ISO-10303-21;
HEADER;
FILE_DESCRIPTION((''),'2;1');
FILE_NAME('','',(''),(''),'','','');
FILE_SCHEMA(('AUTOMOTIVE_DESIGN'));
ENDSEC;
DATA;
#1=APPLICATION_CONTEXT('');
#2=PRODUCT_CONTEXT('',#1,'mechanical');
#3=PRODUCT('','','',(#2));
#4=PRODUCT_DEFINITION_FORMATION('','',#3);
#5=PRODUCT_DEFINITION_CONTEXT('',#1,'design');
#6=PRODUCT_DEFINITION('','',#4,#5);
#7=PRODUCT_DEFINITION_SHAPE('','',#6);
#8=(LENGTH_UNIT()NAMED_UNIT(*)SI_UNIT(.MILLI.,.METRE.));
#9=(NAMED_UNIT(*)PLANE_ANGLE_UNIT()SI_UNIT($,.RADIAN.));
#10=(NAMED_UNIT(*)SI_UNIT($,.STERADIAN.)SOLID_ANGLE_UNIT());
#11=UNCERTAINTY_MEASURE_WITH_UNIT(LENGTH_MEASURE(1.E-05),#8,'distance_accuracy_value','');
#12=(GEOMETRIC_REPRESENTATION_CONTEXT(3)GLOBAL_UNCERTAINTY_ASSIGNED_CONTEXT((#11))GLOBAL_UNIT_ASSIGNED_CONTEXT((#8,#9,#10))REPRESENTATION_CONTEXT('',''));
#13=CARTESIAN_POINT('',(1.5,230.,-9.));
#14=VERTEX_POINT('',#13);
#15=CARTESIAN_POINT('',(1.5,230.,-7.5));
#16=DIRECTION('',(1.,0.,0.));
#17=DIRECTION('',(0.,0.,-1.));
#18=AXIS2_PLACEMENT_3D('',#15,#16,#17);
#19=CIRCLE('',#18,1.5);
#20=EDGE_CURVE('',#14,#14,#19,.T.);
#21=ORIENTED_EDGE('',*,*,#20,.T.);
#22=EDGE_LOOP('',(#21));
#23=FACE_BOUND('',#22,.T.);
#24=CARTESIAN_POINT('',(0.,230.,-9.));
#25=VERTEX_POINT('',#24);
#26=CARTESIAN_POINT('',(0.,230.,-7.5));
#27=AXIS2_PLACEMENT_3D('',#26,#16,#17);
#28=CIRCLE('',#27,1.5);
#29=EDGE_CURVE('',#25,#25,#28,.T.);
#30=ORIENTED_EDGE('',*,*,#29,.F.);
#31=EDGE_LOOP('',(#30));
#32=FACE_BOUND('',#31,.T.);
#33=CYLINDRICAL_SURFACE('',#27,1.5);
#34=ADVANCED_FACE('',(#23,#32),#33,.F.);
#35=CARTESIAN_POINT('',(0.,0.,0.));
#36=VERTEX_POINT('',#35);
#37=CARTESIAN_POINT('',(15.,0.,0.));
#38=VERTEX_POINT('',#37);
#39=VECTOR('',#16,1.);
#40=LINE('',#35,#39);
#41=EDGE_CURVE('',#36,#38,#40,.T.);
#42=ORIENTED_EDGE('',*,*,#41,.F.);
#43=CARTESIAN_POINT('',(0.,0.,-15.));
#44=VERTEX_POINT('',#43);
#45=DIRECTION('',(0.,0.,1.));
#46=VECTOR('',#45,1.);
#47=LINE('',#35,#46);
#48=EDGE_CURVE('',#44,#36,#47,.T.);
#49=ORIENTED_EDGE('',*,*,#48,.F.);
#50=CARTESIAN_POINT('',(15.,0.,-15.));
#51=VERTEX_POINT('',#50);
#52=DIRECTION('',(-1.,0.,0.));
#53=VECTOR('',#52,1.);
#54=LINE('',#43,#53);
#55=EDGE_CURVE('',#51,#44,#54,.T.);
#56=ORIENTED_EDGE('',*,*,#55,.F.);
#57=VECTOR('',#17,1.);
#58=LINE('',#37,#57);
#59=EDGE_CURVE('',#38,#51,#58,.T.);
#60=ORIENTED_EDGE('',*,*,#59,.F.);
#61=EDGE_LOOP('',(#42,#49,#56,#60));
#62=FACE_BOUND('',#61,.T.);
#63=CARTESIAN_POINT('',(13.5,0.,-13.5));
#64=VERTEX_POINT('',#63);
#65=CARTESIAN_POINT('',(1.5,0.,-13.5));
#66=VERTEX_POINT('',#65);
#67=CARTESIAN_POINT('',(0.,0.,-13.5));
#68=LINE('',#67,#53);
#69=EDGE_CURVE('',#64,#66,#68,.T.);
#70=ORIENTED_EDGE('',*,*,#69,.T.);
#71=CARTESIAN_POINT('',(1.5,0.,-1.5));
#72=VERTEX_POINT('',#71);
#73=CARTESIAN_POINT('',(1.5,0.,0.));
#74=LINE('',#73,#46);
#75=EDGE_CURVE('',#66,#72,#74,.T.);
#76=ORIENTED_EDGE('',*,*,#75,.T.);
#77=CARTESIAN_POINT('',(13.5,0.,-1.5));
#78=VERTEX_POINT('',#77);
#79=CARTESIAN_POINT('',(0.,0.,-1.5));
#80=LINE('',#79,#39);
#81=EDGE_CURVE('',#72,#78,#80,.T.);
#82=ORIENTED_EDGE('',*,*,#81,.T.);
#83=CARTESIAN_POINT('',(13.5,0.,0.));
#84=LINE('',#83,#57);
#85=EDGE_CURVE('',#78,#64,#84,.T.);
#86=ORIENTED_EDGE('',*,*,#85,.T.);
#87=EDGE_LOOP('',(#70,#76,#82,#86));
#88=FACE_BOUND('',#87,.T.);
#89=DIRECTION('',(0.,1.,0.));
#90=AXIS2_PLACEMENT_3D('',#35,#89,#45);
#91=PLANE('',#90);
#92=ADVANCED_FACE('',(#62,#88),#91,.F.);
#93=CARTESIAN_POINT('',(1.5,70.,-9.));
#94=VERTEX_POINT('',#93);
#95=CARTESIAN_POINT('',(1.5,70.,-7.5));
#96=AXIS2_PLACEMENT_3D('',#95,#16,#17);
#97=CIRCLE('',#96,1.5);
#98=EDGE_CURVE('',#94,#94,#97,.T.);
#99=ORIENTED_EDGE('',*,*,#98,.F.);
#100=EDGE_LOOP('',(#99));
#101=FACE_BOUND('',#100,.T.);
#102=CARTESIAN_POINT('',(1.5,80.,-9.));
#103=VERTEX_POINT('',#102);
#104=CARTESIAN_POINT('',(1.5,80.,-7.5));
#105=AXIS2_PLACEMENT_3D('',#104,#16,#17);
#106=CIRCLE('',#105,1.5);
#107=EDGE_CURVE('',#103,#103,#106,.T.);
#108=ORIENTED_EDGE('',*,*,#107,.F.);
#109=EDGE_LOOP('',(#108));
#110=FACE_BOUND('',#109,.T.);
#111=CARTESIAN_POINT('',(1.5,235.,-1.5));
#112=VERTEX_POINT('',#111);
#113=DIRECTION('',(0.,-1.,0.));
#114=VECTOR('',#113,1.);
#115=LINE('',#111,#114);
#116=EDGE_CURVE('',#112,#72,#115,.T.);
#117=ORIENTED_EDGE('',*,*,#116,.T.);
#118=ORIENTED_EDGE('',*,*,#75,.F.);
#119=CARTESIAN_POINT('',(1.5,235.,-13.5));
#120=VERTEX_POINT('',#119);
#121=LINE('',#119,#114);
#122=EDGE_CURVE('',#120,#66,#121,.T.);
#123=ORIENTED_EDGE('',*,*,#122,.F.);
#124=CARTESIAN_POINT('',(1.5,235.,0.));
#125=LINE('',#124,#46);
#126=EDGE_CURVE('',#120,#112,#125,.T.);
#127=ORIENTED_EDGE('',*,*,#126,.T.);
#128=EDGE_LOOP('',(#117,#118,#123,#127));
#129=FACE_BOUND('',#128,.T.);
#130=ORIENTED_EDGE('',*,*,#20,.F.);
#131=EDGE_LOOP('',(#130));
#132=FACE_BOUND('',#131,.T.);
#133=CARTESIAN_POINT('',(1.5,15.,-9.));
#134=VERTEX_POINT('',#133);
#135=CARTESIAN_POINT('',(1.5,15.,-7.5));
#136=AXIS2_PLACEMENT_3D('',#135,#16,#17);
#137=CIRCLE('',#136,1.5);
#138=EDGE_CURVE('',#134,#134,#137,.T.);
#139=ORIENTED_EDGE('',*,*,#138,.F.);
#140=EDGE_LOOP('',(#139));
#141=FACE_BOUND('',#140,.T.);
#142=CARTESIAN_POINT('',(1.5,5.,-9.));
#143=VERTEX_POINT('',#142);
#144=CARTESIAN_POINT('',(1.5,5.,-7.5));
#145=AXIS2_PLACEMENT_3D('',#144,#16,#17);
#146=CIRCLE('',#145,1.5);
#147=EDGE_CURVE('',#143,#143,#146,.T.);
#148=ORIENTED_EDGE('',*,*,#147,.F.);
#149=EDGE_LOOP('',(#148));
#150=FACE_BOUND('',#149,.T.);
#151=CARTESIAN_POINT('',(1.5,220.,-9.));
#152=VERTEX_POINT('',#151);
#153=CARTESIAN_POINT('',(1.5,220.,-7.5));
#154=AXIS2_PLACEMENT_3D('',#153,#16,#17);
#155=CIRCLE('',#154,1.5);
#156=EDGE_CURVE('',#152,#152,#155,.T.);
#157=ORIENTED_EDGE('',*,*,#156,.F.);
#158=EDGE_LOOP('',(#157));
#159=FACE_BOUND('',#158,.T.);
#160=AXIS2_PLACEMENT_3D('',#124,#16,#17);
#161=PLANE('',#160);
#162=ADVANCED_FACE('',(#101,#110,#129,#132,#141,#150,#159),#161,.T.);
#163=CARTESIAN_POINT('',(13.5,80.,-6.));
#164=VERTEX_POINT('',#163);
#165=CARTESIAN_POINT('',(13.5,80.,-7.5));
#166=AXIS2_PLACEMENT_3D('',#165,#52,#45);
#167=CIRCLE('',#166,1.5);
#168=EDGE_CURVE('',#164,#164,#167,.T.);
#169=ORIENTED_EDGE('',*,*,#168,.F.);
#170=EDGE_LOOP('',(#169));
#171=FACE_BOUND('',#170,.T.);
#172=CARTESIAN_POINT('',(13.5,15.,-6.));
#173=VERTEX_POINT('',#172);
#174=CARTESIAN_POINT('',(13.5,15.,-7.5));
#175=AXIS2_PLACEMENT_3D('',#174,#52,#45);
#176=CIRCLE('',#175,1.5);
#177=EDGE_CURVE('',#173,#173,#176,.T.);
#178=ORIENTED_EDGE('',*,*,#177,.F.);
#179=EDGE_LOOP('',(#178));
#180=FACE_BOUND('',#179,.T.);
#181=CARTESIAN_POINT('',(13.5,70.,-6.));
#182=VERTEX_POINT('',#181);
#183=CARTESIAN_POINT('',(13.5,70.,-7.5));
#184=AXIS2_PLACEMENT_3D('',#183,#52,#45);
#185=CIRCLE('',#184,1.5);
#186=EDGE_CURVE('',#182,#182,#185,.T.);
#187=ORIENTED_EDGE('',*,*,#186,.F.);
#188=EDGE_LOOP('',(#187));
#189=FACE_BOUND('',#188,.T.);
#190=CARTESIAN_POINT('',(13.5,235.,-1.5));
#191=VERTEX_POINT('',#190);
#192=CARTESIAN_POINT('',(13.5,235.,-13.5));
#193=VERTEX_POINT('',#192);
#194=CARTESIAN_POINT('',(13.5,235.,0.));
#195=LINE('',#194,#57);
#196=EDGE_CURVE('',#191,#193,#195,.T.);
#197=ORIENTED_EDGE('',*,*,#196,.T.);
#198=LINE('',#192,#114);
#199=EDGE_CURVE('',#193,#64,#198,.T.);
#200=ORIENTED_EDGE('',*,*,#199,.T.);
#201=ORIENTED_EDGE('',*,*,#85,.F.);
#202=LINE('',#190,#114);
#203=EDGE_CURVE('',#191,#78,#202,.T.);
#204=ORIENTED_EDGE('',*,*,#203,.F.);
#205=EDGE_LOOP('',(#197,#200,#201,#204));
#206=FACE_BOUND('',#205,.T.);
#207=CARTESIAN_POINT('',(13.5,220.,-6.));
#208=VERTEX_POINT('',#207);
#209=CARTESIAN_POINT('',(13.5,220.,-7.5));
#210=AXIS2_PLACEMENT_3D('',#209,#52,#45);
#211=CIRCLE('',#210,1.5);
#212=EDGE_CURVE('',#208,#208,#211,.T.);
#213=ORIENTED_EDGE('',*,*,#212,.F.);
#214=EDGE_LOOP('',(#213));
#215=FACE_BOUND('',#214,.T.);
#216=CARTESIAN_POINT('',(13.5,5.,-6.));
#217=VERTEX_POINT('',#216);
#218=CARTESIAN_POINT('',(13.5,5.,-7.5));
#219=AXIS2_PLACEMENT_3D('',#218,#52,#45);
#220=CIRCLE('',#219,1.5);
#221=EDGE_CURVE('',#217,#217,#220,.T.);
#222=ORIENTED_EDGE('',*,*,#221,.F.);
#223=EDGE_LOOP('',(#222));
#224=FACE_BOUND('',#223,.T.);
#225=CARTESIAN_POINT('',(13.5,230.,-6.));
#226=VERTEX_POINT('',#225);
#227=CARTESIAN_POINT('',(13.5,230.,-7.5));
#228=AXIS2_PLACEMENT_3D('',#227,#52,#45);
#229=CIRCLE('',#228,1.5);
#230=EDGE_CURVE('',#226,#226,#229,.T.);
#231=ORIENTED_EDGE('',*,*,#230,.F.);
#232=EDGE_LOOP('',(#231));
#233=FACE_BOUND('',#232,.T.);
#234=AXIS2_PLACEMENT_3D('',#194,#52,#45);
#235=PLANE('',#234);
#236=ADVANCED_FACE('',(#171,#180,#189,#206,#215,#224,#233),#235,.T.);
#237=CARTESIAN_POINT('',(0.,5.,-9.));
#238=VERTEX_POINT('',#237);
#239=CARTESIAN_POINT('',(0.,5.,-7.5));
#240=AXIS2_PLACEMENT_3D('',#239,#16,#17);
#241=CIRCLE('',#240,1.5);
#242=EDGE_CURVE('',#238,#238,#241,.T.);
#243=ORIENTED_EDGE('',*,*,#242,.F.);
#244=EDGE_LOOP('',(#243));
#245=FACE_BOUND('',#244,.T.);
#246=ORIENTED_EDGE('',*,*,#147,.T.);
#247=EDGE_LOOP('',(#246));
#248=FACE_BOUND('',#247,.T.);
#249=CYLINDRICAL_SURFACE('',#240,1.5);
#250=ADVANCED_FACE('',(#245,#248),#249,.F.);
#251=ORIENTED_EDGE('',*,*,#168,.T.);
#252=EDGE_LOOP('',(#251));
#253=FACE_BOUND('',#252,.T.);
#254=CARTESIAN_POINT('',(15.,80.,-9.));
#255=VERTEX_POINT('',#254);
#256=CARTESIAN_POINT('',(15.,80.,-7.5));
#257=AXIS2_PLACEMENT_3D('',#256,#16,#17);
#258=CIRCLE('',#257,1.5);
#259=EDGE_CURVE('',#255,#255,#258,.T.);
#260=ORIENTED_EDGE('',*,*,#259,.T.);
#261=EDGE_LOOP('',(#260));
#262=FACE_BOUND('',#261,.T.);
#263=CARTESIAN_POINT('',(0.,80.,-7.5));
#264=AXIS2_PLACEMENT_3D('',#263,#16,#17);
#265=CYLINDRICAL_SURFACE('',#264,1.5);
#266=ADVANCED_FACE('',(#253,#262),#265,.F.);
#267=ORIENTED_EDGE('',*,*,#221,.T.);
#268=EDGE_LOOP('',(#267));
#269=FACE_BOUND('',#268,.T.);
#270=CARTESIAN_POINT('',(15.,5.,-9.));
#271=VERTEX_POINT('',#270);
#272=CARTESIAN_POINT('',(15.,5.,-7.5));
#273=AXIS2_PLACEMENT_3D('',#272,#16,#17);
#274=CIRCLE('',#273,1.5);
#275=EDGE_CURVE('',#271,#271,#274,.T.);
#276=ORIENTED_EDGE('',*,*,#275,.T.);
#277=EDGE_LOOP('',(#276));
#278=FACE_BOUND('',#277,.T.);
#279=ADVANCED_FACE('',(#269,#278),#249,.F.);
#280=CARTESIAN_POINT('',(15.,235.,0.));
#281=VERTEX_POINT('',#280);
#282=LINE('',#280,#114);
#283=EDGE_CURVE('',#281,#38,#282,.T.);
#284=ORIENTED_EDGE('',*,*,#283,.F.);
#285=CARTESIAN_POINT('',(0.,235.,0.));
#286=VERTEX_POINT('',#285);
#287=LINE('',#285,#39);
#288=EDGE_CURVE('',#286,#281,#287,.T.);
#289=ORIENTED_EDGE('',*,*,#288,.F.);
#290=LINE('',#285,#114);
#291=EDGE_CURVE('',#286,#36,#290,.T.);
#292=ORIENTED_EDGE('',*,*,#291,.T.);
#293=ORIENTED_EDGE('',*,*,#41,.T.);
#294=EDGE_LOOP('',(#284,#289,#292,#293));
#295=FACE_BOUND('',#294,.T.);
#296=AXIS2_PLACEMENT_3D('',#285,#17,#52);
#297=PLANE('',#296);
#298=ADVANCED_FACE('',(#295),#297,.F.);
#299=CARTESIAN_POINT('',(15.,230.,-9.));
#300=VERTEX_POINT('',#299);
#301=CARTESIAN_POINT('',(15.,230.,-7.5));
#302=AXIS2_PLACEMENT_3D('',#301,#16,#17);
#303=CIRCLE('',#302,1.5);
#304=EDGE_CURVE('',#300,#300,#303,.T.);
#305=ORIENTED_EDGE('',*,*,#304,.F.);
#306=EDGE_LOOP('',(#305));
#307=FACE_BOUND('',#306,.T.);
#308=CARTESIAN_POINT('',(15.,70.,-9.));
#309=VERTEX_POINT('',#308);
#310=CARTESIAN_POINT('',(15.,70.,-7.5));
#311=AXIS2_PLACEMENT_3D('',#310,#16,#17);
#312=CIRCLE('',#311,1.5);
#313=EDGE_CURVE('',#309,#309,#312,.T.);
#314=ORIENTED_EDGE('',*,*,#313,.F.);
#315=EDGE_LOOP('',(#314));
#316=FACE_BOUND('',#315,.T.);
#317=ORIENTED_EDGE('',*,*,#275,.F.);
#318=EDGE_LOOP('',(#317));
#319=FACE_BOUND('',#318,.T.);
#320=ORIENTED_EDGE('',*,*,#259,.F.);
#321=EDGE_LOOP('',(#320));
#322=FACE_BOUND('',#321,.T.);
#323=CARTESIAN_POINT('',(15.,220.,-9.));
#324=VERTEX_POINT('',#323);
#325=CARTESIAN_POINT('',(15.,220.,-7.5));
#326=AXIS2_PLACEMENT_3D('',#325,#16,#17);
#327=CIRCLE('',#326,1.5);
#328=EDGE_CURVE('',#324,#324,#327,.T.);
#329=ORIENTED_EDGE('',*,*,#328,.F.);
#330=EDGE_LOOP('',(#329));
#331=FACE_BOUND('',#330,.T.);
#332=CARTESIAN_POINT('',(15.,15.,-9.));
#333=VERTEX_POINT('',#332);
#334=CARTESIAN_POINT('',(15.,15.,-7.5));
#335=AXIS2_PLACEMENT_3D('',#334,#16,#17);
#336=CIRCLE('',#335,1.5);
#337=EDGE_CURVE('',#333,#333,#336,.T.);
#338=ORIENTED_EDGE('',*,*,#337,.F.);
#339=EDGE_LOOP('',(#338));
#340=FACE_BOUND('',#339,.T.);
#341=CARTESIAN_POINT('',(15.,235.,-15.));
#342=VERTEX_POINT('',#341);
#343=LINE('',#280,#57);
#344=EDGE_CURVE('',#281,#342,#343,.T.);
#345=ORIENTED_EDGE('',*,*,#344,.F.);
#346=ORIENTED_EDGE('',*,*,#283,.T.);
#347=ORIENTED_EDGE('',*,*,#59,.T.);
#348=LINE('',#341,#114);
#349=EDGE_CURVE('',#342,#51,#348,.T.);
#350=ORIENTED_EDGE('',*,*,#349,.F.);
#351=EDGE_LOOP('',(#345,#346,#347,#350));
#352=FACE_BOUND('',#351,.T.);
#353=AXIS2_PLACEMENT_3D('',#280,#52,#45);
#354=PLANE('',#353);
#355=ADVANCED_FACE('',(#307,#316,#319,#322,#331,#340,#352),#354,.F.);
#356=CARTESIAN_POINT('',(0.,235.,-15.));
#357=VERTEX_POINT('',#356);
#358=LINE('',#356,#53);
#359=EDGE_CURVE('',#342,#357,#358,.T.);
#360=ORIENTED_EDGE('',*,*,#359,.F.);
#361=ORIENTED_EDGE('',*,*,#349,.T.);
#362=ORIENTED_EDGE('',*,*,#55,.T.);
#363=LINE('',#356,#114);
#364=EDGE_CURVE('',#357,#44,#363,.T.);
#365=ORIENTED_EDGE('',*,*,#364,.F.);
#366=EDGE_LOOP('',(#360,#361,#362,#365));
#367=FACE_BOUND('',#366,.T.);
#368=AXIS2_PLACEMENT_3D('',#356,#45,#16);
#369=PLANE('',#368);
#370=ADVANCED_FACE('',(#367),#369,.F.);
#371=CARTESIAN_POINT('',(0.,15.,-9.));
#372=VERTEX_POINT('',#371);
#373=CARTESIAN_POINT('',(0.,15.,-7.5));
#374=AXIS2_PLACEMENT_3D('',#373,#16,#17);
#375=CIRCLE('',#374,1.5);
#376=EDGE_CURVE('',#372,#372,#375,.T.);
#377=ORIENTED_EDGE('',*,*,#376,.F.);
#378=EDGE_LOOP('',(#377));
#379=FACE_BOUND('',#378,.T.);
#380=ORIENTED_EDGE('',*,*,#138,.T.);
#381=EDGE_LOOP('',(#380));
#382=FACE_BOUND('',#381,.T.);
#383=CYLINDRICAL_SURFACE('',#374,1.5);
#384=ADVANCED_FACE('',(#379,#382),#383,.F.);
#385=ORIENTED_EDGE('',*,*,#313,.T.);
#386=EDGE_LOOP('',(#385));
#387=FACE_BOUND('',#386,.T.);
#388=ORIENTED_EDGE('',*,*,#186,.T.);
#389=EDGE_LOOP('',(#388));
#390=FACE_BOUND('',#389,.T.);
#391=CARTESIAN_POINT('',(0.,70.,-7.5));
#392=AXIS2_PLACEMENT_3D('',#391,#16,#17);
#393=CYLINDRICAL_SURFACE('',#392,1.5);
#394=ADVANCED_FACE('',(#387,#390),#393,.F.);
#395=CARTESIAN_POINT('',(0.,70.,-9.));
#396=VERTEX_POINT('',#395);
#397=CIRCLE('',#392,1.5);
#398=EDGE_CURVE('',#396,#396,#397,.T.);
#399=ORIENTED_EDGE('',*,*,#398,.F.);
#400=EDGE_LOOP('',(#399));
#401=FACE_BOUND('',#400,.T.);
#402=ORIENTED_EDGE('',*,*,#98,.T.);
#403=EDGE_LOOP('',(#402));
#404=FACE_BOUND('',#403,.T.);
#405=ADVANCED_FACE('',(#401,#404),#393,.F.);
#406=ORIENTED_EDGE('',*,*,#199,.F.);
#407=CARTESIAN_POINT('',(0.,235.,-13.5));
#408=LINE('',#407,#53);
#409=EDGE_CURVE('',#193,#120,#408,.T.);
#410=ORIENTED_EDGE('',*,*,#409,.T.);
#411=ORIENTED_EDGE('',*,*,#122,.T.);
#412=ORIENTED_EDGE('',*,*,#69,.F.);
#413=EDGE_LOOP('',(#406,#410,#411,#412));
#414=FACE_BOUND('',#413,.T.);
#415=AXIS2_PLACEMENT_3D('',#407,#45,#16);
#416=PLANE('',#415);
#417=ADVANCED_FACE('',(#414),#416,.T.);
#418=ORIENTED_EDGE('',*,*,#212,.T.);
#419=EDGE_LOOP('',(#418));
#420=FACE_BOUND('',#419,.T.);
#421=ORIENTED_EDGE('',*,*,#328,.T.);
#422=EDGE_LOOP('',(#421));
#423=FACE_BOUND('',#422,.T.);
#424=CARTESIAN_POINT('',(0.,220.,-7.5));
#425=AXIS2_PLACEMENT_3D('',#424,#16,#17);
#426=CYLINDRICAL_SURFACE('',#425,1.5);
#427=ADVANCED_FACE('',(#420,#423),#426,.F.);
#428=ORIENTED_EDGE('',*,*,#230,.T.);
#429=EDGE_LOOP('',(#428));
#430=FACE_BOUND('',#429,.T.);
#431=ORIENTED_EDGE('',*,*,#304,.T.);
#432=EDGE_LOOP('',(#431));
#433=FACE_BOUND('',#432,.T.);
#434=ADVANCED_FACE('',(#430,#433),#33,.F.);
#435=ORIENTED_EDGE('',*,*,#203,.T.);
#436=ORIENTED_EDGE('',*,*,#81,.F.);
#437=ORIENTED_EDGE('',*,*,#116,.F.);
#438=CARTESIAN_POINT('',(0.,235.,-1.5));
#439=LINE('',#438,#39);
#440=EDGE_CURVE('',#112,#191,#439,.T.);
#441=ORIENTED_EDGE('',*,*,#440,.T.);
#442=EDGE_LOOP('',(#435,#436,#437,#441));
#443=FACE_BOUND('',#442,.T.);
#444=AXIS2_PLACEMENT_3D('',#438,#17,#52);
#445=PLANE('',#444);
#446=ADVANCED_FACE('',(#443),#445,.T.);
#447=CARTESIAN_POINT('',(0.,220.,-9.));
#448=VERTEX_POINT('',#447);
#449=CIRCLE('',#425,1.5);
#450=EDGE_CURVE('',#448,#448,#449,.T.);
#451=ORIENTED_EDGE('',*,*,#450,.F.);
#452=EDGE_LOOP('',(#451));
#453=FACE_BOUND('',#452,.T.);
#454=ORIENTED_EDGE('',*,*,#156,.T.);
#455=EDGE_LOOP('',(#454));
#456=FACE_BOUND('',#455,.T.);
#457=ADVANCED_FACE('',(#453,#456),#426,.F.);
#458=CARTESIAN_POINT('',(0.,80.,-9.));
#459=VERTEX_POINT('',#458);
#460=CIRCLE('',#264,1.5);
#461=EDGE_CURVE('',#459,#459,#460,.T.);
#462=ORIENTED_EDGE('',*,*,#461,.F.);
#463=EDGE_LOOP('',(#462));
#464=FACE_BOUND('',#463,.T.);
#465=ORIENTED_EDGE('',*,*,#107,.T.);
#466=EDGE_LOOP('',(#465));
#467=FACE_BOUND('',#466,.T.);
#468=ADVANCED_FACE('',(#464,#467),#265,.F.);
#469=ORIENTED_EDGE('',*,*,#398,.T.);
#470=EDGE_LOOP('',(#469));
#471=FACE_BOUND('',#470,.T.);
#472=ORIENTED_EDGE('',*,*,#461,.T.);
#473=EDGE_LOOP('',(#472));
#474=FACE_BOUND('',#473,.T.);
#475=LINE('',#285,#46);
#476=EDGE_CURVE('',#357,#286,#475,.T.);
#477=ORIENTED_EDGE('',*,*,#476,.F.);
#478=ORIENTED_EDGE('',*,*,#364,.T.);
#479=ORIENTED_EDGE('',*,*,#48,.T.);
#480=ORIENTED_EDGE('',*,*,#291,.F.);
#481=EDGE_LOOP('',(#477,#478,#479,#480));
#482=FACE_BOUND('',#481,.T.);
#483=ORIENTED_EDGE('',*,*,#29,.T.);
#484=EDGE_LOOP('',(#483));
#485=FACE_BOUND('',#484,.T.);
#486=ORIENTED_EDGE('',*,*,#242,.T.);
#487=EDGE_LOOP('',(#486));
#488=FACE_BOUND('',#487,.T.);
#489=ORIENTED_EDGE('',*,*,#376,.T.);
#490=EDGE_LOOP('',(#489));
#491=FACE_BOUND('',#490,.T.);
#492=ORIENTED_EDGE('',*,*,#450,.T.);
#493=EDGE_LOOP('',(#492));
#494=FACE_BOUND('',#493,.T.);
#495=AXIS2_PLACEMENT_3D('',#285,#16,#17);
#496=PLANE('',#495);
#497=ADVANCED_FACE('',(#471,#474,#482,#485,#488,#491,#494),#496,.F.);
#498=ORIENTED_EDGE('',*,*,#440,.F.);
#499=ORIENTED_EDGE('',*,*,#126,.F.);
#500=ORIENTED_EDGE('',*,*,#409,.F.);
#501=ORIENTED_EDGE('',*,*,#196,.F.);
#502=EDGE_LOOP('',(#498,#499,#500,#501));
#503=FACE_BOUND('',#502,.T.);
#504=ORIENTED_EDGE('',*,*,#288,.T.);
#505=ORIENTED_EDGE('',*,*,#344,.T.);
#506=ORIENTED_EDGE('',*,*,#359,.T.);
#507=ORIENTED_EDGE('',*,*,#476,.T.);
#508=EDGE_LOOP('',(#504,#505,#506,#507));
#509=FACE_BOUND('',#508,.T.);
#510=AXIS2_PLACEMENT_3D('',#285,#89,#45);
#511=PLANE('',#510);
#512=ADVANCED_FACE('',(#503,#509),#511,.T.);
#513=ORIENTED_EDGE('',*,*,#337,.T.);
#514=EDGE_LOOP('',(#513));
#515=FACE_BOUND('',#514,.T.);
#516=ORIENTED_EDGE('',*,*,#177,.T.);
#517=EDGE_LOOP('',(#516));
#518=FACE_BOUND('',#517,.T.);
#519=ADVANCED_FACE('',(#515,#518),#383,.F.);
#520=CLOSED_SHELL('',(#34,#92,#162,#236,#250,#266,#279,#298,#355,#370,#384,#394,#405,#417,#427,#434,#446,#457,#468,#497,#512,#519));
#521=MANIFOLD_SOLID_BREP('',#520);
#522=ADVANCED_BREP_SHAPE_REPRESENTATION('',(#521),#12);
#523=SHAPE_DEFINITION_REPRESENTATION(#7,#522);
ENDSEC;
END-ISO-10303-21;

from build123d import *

# Parameters (mm, degrees)
SKETCH1_W              = 15
SKETCH1_H              = 15
SKETCH1_W_2            = 12
SKETCH1_H_2            = 12
EXTRUDE_THIN1_DEPTH    = 235
CUT_EXTRUDE1_OUTLINE_R = 1.5
CUT_EXTRUDE1_DEPTH     = 15
SKETCH3_R              = 1.5
CUT_EXTRUDE2_DEPTH     = 236.95550428


# Read off the part's stored shape, not the designer's step: Cut-Extrude1
with BuildPart() as part:
    # Sketch1 → Extrude-Thin1 (new body)
    with BuildSketch(Plane(origin=(0, 0, 0), x_dir=(1, 0, 0), z_dir=(0, 1, 0))):
        with Locations((7.5, 7.5)):
            Rectangle(SKETCH1_W, SKETCH1_H)
        with Locations((7.5, 7.5)):
            Rectangle(SKETCH1_W_2, SKETCH1_H_2, mode=Mode.SUBTRACT)
    extrude(amount=EXTRUDE_THIN1_DEPTH)

    # Cut-Extrude1 outline → Cut-Extrude1 (cut)
    with BuildSketch(Plane.YZ):
        with Locations((15, -7.5)):
            Circle(CUT_EXTRUDE1_OUTLINE_R)
        with Locations((5, -7.5)):
            Circle(CUT_EXTRUDE1_OUTLINE_R)
        with Locations((220, -7.5)):
            Circle(CUT_EXTRUDE1_OUTLINE_R)
        with Locations((230, -7.5)):
            Circle(CUT_EXTRUDE1_OUTLINE_R)
    extrude(amount=CUT_EXTRUDE1_DEPTH, mode=Mode.SUBTRACT)

    # Sketch3 → Cut-Extrude2 (cut, through all)
    with BuildSketch(Plane(origin=(15, 0, 0), x_dir=(0, 0, -1), z_dir=(1, 0, 0))):
        with Locations((7.5, 80)):
            Circle(SKETCH3_R)
        with Locations((7.5, 70)):
            Circle(SKETCH3_R)
    extrude(amount=-CUT_EXTRUDE2_DEPTH, mode=Mode.SUBTRACT)


solid = part.part
